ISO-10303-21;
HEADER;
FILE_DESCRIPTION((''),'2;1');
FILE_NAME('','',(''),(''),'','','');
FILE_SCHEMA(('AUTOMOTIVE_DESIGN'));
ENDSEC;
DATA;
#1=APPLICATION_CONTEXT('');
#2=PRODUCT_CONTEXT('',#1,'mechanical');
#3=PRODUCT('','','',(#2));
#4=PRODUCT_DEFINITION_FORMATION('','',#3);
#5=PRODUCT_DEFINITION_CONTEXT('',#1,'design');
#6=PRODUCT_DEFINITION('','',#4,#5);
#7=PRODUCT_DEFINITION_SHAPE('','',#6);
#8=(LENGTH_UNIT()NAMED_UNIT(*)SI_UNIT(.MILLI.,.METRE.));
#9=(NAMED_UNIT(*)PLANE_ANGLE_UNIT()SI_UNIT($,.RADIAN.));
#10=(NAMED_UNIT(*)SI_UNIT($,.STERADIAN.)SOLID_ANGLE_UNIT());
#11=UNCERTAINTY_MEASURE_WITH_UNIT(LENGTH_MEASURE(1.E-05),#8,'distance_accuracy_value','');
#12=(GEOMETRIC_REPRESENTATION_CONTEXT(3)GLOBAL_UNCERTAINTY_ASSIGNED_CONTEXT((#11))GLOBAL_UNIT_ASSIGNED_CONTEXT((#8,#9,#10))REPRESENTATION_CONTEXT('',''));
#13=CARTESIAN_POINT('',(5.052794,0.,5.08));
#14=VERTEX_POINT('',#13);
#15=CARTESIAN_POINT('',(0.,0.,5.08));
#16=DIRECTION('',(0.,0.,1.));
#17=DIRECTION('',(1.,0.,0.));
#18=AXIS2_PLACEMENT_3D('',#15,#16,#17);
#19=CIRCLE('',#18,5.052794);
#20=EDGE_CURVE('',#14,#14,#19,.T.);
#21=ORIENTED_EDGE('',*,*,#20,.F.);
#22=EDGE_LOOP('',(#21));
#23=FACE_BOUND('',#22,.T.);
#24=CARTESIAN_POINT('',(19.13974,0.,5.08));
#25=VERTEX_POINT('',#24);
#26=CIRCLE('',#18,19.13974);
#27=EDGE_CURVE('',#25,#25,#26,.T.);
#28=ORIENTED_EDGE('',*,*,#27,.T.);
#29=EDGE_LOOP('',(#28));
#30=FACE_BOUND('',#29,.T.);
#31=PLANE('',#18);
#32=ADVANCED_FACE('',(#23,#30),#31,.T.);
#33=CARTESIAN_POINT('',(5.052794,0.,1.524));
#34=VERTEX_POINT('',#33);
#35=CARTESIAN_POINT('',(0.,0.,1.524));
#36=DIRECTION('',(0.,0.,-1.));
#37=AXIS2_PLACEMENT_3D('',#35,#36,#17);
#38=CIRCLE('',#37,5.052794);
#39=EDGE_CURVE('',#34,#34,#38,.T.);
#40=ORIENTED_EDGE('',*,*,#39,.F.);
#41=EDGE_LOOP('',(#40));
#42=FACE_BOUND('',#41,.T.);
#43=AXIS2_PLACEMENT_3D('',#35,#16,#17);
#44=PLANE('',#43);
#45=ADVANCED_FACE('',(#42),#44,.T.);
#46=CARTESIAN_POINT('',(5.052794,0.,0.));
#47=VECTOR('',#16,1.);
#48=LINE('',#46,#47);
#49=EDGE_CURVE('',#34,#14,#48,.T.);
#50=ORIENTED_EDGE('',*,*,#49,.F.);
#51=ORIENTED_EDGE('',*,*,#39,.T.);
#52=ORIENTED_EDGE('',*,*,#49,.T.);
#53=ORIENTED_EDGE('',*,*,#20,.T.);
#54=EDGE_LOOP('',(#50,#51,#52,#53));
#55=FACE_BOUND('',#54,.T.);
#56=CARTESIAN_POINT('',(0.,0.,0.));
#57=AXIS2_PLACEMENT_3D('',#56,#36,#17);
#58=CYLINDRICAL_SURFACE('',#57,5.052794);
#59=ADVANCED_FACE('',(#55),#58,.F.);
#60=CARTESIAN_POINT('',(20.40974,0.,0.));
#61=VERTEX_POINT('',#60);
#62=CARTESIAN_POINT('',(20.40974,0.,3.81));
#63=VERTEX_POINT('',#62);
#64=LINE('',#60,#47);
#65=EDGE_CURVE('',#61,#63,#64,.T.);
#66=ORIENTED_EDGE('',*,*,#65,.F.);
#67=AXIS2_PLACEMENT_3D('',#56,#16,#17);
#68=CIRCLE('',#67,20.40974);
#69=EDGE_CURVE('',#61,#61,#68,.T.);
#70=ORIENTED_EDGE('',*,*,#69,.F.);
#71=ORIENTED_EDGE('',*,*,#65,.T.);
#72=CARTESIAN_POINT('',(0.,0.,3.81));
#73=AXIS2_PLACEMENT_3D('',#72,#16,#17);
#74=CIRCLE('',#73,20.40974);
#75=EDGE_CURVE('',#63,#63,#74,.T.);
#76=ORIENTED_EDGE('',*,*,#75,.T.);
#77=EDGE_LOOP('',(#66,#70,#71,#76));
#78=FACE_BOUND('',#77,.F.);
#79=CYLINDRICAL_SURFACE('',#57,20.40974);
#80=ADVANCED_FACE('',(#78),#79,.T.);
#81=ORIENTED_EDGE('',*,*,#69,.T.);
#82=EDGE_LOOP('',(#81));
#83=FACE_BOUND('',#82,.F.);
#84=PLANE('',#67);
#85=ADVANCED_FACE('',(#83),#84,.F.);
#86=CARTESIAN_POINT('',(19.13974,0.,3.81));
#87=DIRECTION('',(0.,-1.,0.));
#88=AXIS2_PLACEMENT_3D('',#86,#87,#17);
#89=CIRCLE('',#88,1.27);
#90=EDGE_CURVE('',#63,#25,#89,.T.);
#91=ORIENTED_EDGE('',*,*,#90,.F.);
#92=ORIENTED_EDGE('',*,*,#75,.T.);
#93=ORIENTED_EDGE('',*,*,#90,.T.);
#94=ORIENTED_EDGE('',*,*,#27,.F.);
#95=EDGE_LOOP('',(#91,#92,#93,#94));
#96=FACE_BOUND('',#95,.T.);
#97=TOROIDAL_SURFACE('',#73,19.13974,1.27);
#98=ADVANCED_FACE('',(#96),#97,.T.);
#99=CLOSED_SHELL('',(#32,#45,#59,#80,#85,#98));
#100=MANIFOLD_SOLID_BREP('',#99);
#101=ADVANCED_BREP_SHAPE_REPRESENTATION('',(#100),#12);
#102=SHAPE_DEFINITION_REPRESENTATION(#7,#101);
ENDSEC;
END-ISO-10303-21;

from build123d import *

# Parameters (mm, degrees)
F1_R     = 20.4097396771
F1_R_2   = 5.0527941738
F2_DEPTH = 5.08
F3_R     = 9.3754452045
F4_DEPTH = 1.524
F6_R     = 1.27


# Not quite as in the source:
# - a feature names something its author has since deleted; it is built from what else it names


with BuildPart() as f2:
    # F1 (on face) → F2 (new body)
    with BuildSketch(Plane.XY):
        Circle(F1_R)
        Circle(F1_R_2, mode=Mode.SUBTRACT)
    extrude(amount=F2_DEPTH)

    # F3 (on Top) → F4 (join)
    with BuildSketch(Plane.XY):
        Circle(F3_R)
    extrude(amount=F4_DEPTH)

    # F6
    f6_edges = [f2.edges().sort_by_distance(p)[0] for p in [
        (-20.40974, 0, 5.08),
    ]]
    fillet(f6_edges, radius=F6_R)


solid = f2.part
